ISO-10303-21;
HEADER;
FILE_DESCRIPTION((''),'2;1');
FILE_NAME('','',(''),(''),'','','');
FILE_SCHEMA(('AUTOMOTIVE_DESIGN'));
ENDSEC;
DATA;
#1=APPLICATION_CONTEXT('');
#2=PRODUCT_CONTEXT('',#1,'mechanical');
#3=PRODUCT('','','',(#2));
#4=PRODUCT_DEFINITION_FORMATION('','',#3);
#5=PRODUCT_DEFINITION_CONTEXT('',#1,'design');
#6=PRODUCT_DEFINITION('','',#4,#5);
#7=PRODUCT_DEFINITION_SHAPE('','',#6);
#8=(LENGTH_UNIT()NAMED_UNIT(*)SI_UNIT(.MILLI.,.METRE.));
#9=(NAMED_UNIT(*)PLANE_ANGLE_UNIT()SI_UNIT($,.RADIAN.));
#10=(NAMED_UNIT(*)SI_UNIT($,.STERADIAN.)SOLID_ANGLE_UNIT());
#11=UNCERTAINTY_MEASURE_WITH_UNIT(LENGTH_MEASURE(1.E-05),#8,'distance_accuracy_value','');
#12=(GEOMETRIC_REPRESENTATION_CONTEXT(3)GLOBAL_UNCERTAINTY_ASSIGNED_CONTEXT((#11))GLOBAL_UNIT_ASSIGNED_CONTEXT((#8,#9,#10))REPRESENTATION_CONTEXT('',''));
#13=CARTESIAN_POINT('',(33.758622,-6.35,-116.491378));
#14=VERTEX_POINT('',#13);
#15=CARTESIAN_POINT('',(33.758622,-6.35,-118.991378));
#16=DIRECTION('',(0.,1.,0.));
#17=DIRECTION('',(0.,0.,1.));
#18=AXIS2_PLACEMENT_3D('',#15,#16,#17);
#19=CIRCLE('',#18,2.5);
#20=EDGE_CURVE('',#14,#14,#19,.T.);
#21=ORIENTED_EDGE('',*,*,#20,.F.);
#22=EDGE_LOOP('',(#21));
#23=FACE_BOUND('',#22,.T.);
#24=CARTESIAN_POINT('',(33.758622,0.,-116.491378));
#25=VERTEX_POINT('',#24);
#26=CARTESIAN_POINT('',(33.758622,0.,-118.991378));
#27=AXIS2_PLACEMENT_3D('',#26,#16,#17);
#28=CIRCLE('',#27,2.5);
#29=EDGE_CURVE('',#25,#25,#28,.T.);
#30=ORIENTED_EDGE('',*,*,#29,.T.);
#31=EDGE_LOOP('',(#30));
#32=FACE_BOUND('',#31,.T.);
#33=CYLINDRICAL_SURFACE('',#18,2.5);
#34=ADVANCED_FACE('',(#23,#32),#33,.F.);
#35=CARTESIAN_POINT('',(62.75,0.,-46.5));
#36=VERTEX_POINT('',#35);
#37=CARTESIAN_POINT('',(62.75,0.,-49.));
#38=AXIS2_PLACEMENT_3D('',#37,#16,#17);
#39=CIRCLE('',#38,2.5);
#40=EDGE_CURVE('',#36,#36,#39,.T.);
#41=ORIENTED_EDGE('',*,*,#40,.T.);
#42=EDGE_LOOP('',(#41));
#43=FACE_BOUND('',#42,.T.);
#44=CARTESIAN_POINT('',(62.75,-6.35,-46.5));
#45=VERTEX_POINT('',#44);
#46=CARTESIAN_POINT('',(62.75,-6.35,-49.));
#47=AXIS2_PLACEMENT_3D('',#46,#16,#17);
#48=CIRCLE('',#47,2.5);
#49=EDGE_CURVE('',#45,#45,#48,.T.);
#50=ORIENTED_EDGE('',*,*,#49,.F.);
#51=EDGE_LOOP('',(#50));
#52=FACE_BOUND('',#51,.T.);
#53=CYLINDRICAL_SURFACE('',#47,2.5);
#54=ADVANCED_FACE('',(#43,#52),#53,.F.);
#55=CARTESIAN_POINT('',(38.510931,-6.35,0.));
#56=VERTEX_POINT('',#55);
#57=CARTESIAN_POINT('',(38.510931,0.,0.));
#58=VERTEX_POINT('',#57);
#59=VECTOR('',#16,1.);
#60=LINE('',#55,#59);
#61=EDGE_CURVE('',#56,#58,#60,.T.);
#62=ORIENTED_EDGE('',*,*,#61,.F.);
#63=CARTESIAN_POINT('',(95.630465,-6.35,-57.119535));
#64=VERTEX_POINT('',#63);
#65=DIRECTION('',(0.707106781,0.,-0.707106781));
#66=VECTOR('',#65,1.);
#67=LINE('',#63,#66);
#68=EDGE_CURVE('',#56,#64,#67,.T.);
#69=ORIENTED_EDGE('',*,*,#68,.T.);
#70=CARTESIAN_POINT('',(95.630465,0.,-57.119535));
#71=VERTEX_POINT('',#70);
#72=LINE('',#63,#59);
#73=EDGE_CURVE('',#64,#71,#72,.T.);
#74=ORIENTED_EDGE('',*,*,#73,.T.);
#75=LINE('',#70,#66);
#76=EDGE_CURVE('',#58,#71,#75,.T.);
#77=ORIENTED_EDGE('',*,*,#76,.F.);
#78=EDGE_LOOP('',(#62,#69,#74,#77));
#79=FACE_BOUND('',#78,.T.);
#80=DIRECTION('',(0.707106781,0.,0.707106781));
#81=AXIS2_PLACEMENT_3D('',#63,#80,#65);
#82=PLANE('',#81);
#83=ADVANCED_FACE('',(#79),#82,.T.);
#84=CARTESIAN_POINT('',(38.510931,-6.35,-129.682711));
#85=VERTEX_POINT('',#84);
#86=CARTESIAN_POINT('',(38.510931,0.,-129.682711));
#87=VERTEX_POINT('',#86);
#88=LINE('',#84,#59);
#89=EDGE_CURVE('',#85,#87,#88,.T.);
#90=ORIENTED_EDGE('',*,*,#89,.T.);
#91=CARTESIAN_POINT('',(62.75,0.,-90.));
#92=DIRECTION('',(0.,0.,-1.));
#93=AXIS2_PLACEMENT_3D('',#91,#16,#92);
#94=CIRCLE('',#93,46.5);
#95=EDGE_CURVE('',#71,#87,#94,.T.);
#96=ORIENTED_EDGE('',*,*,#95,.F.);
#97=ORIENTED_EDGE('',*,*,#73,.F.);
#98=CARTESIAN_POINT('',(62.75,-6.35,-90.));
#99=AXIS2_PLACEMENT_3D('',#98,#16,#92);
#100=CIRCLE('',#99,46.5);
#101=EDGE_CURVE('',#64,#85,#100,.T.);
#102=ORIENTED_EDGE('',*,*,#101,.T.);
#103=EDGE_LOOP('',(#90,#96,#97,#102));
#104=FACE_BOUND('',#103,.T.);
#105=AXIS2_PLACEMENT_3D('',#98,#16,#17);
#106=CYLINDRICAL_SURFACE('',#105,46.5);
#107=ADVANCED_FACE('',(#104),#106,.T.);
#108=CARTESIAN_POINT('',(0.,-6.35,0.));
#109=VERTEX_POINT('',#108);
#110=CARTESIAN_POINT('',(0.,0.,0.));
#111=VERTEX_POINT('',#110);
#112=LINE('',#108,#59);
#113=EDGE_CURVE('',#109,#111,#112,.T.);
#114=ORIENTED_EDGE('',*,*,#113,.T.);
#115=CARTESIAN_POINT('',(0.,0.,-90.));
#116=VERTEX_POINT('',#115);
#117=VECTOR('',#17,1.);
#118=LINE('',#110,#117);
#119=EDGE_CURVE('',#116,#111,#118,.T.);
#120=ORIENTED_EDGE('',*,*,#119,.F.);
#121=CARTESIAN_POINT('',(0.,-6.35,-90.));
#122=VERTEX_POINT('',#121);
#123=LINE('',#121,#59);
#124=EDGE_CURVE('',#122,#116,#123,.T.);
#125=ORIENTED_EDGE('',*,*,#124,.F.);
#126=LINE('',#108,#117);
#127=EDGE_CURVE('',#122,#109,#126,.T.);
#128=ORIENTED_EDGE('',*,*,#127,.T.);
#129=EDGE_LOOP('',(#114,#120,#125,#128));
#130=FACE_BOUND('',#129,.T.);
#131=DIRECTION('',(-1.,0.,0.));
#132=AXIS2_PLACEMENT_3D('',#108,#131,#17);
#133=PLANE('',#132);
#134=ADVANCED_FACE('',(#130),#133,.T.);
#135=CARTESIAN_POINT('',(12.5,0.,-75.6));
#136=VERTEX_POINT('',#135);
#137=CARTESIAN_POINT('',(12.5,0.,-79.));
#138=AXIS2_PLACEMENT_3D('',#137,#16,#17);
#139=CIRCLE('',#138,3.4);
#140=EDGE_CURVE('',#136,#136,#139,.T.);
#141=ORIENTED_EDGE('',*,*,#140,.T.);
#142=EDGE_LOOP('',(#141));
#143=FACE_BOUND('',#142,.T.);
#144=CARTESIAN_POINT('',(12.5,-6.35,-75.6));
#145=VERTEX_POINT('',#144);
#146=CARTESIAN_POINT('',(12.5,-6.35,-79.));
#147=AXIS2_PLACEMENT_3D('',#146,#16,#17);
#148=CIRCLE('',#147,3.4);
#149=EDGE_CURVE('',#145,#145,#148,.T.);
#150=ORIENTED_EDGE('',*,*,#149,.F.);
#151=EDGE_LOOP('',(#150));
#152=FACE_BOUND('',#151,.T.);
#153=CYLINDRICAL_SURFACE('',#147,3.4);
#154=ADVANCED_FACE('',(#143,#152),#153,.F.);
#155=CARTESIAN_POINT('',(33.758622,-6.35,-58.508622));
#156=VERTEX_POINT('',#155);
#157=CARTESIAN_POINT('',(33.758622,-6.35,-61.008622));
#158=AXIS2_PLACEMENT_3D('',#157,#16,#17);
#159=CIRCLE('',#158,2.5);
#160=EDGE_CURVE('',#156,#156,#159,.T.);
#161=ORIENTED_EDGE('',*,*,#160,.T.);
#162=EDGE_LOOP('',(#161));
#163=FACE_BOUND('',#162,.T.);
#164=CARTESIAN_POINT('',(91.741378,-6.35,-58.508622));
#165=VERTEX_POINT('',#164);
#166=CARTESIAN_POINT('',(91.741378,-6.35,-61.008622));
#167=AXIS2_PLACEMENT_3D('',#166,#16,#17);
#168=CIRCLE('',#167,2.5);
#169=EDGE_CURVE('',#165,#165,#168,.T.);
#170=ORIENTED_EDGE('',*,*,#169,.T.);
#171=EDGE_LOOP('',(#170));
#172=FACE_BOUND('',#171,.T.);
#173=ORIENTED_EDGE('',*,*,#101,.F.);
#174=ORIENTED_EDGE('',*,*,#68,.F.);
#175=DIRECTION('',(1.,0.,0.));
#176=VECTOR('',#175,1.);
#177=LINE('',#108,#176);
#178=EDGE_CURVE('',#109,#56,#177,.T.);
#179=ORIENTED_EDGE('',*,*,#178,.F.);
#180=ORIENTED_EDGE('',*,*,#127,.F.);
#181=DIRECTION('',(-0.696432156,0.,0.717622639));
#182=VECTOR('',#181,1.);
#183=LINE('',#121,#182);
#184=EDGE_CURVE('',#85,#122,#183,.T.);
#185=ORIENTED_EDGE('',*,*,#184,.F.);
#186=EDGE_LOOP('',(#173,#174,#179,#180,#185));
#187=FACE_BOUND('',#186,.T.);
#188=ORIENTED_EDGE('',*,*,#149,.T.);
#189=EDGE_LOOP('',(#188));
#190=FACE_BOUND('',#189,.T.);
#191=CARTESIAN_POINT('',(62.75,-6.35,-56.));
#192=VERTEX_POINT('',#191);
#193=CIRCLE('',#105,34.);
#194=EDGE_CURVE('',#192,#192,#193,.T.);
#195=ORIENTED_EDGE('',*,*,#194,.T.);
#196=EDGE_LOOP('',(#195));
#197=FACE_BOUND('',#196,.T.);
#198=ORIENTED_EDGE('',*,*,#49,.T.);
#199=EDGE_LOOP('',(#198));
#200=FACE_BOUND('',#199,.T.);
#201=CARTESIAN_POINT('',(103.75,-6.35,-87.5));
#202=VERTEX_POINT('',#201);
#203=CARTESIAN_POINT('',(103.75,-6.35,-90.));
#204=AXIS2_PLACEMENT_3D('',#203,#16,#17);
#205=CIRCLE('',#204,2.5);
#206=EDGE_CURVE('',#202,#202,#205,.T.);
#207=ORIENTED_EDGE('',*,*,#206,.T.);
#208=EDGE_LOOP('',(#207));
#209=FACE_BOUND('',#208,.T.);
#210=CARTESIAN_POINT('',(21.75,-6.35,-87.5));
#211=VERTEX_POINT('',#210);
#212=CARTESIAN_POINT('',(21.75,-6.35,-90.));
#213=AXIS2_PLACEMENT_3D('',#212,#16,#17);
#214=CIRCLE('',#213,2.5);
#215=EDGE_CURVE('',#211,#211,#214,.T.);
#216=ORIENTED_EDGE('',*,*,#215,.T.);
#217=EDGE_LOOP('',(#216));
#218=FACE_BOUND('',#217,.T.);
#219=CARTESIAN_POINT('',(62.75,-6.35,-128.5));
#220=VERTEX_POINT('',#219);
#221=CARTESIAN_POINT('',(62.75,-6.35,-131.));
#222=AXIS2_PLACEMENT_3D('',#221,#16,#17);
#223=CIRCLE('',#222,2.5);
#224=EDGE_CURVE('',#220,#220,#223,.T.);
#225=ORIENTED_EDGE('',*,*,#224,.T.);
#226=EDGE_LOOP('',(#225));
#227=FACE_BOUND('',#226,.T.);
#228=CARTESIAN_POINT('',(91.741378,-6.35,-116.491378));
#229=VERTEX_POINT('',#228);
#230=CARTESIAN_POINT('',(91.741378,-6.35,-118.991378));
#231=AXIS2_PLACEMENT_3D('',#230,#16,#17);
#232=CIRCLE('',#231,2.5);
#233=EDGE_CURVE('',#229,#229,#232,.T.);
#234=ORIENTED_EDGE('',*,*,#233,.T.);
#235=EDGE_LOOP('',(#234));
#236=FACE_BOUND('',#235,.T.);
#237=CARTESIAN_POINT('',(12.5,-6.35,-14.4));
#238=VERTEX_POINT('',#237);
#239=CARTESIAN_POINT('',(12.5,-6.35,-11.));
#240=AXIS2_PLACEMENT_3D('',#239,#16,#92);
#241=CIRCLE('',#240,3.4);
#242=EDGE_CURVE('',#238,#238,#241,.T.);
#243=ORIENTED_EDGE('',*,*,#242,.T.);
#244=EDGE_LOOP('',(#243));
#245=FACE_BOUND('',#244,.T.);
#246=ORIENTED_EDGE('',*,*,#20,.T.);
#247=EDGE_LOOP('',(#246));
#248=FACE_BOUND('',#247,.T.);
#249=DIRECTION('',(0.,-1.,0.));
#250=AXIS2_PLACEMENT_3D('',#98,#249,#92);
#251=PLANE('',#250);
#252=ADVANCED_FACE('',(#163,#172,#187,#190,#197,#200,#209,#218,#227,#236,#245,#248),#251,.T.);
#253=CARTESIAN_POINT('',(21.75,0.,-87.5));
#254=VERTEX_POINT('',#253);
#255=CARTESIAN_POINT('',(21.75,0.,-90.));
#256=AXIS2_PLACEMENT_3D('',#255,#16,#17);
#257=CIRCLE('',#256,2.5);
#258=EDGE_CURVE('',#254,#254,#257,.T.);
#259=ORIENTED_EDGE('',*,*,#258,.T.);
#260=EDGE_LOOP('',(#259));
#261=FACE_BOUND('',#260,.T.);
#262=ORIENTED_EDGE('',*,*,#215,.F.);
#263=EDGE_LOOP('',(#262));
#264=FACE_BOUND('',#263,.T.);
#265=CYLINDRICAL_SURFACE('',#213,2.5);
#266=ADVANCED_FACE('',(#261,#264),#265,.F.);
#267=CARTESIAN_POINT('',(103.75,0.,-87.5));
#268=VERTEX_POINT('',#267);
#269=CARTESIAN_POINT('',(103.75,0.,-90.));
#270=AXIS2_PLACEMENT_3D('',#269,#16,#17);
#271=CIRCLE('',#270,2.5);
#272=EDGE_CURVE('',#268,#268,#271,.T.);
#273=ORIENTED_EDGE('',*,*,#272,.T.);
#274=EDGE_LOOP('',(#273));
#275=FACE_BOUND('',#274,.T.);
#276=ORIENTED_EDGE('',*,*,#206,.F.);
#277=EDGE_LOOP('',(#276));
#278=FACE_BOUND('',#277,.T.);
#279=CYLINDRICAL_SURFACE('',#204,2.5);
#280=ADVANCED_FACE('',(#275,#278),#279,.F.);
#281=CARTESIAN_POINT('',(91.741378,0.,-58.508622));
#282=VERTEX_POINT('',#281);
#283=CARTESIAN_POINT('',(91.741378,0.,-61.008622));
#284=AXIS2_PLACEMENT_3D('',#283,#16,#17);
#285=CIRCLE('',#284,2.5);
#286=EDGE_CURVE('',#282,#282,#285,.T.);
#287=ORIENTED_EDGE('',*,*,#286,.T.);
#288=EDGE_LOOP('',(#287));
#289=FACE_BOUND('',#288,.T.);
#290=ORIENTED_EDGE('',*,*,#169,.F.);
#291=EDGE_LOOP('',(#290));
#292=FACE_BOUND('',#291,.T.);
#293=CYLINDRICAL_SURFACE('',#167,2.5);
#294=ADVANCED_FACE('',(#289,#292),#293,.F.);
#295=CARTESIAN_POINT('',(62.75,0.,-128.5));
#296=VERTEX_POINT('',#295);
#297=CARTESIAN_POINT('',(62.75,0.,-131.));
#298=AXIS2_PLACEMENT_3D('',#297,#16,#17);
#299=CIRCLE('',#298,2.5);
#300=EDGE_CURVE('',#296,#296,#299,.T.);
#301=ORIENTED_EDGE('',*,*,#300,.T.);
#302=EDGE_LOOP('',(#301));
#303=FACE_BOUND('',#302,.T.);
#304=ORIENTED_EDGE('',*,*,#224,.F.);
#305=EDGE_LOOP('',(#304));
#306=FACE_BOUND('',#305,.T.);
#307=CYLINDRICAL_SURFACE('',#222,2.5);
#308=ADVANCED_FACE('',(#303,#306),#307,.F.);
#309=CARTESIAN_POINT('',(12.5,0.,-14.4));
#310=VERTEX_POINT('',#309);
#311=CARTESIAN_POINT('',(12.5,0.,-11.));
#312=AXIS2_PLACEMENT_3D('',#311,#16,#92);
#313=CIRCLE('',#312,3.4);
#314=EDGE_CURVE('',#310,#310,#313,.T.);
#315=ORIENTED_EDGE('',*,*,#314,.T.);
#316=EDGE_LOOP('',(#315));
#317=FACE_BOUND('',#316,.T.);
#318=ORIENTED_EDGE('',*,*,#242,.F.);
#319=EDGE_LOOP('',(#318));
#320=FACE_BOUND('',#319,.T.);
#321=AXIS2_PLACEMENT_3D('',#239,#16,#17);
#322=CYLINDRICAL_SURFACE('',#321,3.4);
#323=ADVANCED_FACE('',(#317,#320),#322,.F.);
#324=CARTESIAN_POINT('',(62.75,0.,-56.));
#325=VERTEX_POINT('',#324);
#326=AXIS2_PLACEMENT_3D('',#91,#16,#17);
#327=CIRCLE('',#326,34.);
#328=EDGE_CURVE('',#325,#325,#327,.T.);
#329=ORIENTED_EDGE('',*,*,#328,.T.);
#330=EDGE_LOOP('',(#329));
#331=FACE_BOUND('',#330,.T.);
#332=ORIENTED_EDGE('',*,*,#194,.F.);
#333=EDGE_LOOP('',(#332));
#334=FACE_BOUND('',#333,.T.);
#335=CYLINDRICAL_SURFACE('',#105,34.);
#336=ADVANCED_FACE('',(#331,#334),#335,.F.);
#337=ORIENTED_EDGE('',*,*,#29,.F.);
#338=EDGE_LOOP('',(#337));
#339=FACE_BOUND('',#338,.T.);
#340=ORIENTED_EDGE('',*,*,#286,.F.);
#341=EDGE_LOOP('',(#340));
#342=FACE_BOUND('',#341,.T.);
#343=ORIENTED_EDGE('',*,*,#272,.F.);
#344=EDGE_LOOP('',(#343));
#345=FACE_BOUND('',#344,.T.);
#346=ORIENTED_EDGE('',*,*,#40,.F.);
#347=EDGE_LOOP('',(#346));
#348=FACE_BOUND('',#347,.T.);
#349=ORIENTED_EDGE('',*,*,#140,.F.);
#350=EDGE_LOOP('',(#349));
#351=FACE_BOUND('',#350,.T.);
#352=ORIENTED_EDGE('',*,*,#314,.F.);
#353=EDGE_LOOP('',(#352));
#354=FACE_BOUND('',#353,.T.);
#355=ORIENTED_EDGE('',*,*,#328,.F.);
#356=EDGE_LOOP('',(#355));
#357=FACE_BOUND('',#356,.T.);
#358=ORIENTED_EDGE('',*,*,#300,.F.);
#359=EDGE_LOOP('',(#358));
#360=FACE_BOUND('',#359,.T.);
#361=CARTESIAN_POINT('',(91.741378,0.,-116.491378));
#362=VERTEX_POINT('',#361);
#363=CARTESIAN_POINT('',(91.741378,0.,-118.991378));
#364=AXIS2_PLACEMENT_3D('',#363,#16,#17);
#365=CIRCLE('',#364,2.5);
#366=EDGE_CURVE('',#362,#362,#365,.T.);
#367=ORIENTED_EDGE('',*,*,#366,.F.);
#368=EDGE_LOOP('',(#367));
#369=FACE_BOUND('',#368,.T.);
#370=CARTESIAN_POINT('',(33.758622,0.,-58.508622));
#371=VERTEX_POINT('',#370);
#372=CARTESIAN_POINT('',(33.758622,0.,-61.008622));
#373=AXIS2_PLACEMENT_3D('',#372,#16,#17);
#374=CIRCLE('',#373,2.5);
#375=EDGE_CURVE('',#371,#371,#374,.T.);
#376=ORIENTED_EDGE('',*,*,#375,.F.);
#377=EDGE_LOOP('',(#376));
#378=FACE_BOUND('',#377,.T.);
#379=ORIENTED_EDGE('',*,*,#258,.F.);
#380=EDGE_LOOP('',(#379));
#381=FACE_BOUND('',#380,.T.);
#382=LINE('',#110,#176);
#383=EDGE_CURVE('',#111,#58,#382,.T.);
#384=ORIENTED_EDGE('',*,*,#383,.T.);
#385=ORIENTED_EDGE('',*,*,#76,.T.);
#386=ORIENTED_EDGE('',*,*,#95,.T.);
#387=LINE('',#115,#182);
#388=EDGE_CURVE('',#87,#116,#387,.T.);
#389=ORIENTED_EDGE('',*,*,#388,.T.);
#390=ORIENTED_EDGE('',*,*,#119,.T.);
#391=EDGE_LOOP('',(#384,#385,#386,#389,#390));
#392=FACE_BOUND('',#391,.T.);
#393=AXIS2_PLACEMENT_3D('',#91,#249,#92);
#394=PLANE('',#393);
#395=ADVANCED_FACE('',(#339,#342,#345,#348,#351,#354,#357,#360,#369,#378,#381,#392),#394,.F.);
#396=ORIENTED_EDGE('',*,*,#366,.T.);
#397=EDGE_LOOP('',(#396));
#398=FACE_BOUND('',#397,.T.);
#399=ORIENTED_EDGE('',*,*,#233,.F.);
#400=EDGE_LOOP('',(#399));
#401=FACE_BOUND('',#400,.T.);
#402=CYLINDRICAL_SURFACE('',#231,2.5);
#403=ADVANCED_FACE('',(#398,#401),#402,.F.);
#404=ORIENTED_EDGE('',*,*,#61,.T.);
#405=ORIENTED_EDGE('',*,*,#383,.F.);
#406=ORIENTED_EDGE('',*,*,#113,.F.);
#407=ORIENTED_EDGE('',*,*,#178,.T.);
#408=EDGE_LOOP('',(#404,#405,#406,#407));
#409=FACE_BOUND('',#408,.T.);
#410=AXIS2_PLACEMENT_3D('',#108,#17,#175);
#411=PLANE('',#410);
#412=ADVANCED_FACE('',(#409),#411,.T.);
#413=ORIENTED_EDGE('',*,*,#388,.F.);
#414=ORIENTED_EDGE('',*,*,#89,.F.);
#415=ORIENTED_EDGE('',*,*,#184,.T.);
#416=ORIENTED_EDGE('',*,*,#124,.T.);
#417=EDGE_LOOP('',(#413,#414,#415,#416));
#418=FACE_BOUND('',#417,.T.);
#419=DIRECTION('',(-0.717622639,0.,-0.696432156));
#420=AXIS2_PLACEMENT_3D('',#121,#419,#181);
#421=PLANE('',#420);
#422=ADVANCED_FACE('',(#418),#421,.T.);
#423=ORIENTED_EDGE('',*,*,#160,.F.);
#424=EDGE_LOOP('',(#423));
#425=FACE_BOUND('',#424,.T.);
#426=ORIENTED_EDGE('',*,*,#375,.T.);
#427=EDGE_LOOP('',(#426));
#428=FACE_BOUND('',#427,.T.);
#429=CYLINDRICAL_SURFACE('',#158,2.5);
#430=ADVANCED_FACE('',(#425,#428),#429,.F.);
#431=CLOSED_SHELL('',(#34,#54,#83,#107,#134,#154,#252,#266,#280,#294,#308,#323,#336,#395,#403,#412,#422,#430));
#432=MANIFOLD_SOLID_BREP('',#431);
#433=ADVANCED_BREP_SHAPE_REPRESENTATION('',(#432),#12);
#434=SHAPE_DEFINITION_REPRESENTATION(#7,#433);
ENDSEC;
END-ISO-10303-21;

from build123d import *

# Parameters (mm, degrees)
BASE_FLANGE1_DEPTH = 6.35
SKETCH8_R          = 3.4
CUT_EXTRUDE1_DEPTH = 175.95180765
SKETCH9_R          = 34
CUT_EXTRUDE2_DEPTH = 175.95180765
SKETCH10_R         = 2.5
CUT_EXTRUDE3_DEPTH = 175.95180765


# Sheet-metal steps are written as plain solids
with BuildPart() as part:
    # Sketch2 → Base-Flange1 (new body)
    with BuildSketch(Plane(origin=(0, 0, 0), x_dir=(1, 0, 0), z_dir=(0, 1, 0))):
        with BuildLine():
            Line((0, 0), (38.51093065, 0))
            Line((38.51093065, 0), (95.630465325, 57.119534675))
            ThreePointArc((95.630465325, 57.119534675), (99.287953618, 118.761570635), (38.51093065, 129.682710556))
            Line((38.51093065, 129.682710556), (0, 90))
            Line((0, 90), (0, 0))
        make_face()
    extrude(amount=-BASE_FLANGE1_DEPTH)

    # Sketch8 → Cut-Extrude1 (cut, through all)
    with BuildSketch(Plane(origin=(0, 0, 0), x_dir=(1, 0, 0), z_dir=(0, 1, 0))):
        with Locations(Location((12.5, 79, 0), (0, 0, 270))):
            Circle(SKETCH8_R)
        with Locations(Location((12.5, 11, 0), (0, 0, 90))):
            Circle(SKETCH8_R)
    extrude(amount=-CUT_EXTRUDE1_DEPTH, mode=Mode.SUBTRACT)

    # Sketch9 → Cut-Extrude2 (cut, through all)
    with BuildSketch(Plane(origin=(0, 0, 0), x_dir=(1, 0, 0), z_dir=(0, 1, 0))):
        with Locations(Location((62.75, 90, 0), (0, 0, 270))):
            Circle(SKETCH9_R)
    extrude(amount=-CUT_EXTRUDE2_DEPTH, mode=Mode.SUBTRACT)

    # Sketch10 → Cut-Extrude3 (cut, through all)
    with BuildSketch(Plane(origin=(0, 0, 0), x_dir=(1, 0, 0), z_dir=(0, 1, 0))):
        with Locations(Location((62.75, 131, 0), (0, 0, 270))):
            Circle(SKETCH10_R)
        with Locations(Location((91.741378029, 118.991378029, 0), (0, 0, 270))):
            Circle(SKETCH10_R)
        with Locations(Location((103.75, 90, 0), (0, 0, 270))):
            Circle(SKETCH10_R)
        with Locations(Location((91.741378029, 61.008621971, 0), (0, 0, 270))):
            Circle(SKETCH10_R)
        with Locations(Location((62.75, 49, 0), (0, 0, 270))):
            Circle(SKETCH10_R)
        with Locations(Location((33.758621971, 61.008621971, 0), (0, 0, 270))):
            Circle(SKETCH10_R)
        with Locations(Location((21.75, 90, 0), (0, 0, 270))):
            Circle(SKETCH10_R)
        with Locations(Location((33.758621971, 118.991378029, 0), (0, 0, 270))):
            Circle(SKETCH10_R)
    extrude(amount=-CUT_EXTRUDE3_DEPTH, mode=Mode.SUBTRACT)


solid = part.part
